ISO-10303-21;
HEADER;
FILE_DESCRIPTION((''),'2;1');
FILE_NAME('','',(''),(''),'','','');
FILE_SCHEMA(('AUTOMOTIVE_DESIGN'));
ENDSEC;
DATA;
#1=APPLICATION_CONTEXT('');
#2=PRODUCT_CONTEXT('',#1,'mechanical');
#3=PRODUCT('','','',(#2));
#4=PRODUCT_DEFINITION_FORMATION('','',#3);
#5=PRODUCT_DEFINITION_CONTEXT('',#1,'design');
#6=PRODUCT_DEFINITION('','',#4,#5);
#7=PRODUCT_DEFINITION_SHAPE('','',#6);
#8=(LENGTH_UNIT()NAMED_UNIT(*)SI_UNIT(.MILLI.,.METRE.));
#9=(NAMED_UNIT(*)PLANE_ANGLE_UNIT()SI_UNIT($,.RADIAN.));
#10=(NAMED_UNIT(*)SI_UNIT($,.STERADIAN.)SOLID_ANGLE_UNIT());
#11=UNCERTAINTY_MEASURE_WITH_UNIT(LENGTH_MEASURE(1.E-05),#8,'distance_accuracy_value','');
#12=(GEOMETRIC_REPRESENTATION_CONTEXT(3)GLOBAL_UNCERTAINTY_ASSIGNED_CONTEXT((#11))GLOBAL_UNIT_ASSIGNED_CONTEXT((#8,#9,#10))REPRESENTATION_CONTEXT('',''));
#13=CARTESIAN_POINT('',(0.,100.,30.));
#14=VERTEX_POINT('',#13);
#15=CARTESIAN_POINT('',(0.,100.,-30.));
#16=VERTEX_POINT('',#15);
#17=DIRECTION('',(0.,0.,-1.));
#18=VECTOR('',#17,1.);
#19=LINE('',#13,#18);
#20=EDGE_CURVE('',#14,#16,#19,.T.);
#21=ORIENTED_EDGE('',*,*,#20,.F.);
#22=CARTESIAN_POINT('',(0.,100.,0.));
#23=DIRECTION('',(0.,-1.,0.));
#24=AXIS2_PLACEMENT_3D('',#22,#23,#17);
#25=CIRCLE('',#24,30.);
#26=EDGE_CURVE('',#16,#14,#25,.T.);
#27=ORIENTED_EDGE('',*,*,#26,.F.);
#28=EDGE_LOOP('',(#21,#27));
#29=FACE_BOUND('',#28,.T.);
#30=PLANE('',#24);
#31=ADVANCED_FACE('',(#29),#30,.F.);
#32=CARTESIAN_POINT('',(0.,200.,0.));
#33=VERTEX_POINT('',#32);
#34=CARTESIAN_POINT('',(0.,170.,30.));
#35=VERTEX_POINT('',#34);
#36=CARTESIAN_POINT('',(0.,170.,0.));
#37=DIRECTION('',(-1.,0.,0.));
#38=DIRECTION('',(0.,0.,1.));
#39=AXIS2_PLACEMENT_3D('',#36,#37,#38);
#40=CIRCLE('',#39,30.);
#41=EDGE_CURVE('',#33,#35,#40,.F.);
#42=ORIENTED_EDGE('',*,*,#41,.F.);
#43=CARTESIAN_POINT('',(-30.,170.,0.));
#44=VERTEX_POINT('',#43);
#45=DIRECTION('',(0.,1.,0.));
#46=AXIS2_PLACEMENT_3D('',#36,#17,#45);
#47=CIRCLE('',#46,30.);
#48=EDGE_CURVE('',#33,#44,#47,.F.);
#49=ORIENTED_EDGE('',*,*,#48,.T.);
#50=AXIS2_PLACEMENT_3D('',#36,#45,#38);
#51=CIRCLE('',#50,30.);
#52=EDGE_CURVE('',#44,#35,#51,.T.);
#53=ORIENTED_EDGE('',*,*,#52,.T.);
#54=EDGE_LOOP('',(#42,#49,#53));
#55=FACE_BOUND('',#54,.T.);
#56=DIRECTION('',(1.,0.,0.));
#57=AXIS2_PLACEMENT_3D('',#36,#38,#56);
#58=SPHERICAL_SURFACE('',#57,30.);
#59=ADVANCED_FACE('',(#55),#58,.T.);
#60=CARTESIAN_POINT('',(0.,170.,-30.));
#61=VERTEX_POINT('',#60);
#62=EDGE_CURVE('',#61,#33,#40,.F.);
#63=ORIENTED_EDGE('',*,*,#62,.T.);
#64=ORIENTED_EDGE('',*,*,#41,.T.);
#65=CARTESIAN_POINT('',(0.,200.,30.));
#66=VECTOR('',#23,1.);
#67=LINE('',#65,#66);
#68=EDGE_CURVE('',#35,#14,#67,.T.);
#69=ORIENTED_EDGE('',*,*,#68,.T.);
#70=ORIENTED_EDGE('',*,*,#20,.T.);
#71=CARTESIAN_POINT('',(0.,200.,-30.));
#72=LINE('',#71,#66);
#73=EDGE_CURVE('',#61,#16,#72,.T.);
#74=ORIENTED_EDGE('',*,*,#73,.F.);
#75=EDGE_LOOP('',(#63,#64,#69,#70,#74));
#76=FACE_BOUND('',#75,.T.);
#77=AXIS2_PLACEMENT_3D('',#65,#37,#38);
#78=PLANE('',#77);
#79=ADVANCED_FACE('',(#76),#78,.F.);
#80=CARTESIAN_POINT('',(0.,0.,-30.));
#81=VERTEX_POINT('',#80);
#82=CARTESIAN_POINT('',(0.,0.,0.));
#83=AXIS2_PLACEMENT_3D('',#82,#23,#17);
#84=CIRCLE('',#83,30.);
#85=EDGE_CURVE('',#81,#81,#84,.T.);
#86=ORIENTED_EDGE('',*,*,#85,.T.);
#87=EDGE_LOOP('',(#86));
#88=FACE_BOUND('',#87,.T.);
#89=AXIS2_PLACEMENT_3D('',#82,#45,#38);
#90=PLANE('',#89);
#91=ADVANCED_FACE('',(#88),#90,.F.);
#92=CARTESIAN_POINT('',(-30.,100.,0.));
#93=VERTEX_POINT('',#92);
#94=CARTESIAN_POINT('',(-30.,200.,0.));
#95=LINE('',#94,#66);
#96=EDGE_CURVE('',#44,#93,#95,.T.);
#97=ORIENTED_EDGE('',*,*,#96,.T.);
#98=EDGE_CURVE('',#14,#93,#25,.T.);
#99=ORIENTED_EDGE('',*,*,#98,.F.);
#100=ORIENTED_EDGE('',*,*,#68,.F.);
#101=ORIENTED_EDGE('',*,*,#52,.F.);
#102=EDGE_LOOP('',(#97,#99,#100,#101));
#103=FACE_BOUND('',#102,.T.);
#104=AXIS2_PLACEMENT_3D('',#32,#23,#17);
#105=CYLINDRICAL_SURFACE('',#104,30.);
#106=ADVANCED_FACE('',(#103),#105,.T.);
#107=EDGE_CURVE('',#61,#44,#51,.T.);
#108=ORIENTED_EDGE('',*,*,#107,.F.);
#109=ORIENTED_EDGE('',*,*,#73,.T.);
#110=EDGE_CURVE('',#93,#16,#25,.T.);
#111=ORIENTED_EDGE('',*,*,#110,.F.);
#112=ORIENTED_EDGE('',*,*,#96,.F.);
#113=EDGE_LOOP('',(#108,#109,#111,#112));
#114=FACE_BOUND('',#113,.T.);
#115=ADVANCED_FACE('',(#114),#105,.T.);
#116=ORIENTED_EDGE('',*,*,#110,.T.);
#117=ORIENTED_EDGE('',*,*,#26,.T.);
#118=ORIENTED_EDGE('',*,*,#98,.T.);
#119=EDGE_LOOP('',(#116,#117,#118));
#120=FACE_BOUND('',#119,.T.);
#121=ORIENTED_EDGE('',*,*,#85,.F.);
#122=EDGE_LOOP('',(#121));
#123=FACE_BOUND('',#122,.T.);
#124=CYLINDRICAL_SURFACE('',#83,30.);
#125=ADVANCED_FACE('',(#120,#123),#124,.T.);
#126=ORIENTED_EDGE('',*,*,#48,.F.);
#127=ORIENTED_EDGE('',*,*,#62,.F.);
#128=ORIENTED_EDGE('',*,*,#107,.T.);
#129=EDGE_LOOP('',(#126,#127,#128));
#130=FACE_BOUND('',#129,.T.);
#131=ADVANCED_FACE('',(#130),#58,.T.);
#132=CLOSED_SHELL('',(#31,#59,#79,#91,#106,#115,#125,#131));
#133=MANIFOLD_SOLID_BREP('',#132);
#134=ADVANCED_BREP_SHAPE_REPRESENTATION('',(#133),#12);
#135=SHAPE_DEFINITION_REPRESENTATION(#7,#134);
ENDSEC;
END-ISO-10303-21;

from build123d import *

# Parameters (mm, degrees)
SKETCH_1_W      = 30
SKETCH_1_H      = 100
SKETCH_2_W      = 30
SKETCH_2_H      = 60
EXTRUDE_1_DEPTH = 100
FILLET_1_R      = 30


with BuildPart() as part:
    # Эскиз1 → Повернуть1 (revolve)
    with BuildSketch(Plane.XY, mode=Mode.PRIVATE) as revolve_1_sk:
        with Locations((-15, 50)):
            Rectangle(SKETCH_1_W, SKETCH_1_H)
    revolve(revolve_1_sk.sketch.rotate(Axis((0, 0, 0), (0, 1, 0)), 270), axis=Axis((0, 0, 0), (0, 1, 0)))

    # Эскиз2 → Бобышка-Вытянуть1 (add)
    with BuildSketch(Plane(origin=(0, 100, 0), x_dir=(1, 0, 0), z_dir=(0, 1, 0))):
        with Locations((-15, 0)):
            Rectangle(SKETCH_2_W, SKETCH_2_H)
    extrude(amount=EXTRUDE_1_DEPTH)

    # Скругление1
    fillet_1_edges = [part.edges().sort_by_distance(p)[0] for p in [
        (-30, 150, -30),
    ]]
    fillet(fillet_1_edges, radius=FILLET_1_R - 0.0001)  # a hair under: the kernel refuses the full size
    fillet_1_2_edges = [part.edges().sort_by_distance(p)[0] for p in [
        (-30, 150, 30),
    ]]
    fillet(fillet_1_2_edges, radius=FILLET_1_R - 0.0001)  # a hair under: the kernel refuses the full size
    fillet_1_3_edges = [part.edges().sort_by_distance(p)[0] for p in [
        (-30, 200, 0),
    ]]
    fillet(fillet_1_3_edges, radius=FILLET_1_R - 0.0001)  # a hair under: the kernel refuses the full size


solid = part.part
